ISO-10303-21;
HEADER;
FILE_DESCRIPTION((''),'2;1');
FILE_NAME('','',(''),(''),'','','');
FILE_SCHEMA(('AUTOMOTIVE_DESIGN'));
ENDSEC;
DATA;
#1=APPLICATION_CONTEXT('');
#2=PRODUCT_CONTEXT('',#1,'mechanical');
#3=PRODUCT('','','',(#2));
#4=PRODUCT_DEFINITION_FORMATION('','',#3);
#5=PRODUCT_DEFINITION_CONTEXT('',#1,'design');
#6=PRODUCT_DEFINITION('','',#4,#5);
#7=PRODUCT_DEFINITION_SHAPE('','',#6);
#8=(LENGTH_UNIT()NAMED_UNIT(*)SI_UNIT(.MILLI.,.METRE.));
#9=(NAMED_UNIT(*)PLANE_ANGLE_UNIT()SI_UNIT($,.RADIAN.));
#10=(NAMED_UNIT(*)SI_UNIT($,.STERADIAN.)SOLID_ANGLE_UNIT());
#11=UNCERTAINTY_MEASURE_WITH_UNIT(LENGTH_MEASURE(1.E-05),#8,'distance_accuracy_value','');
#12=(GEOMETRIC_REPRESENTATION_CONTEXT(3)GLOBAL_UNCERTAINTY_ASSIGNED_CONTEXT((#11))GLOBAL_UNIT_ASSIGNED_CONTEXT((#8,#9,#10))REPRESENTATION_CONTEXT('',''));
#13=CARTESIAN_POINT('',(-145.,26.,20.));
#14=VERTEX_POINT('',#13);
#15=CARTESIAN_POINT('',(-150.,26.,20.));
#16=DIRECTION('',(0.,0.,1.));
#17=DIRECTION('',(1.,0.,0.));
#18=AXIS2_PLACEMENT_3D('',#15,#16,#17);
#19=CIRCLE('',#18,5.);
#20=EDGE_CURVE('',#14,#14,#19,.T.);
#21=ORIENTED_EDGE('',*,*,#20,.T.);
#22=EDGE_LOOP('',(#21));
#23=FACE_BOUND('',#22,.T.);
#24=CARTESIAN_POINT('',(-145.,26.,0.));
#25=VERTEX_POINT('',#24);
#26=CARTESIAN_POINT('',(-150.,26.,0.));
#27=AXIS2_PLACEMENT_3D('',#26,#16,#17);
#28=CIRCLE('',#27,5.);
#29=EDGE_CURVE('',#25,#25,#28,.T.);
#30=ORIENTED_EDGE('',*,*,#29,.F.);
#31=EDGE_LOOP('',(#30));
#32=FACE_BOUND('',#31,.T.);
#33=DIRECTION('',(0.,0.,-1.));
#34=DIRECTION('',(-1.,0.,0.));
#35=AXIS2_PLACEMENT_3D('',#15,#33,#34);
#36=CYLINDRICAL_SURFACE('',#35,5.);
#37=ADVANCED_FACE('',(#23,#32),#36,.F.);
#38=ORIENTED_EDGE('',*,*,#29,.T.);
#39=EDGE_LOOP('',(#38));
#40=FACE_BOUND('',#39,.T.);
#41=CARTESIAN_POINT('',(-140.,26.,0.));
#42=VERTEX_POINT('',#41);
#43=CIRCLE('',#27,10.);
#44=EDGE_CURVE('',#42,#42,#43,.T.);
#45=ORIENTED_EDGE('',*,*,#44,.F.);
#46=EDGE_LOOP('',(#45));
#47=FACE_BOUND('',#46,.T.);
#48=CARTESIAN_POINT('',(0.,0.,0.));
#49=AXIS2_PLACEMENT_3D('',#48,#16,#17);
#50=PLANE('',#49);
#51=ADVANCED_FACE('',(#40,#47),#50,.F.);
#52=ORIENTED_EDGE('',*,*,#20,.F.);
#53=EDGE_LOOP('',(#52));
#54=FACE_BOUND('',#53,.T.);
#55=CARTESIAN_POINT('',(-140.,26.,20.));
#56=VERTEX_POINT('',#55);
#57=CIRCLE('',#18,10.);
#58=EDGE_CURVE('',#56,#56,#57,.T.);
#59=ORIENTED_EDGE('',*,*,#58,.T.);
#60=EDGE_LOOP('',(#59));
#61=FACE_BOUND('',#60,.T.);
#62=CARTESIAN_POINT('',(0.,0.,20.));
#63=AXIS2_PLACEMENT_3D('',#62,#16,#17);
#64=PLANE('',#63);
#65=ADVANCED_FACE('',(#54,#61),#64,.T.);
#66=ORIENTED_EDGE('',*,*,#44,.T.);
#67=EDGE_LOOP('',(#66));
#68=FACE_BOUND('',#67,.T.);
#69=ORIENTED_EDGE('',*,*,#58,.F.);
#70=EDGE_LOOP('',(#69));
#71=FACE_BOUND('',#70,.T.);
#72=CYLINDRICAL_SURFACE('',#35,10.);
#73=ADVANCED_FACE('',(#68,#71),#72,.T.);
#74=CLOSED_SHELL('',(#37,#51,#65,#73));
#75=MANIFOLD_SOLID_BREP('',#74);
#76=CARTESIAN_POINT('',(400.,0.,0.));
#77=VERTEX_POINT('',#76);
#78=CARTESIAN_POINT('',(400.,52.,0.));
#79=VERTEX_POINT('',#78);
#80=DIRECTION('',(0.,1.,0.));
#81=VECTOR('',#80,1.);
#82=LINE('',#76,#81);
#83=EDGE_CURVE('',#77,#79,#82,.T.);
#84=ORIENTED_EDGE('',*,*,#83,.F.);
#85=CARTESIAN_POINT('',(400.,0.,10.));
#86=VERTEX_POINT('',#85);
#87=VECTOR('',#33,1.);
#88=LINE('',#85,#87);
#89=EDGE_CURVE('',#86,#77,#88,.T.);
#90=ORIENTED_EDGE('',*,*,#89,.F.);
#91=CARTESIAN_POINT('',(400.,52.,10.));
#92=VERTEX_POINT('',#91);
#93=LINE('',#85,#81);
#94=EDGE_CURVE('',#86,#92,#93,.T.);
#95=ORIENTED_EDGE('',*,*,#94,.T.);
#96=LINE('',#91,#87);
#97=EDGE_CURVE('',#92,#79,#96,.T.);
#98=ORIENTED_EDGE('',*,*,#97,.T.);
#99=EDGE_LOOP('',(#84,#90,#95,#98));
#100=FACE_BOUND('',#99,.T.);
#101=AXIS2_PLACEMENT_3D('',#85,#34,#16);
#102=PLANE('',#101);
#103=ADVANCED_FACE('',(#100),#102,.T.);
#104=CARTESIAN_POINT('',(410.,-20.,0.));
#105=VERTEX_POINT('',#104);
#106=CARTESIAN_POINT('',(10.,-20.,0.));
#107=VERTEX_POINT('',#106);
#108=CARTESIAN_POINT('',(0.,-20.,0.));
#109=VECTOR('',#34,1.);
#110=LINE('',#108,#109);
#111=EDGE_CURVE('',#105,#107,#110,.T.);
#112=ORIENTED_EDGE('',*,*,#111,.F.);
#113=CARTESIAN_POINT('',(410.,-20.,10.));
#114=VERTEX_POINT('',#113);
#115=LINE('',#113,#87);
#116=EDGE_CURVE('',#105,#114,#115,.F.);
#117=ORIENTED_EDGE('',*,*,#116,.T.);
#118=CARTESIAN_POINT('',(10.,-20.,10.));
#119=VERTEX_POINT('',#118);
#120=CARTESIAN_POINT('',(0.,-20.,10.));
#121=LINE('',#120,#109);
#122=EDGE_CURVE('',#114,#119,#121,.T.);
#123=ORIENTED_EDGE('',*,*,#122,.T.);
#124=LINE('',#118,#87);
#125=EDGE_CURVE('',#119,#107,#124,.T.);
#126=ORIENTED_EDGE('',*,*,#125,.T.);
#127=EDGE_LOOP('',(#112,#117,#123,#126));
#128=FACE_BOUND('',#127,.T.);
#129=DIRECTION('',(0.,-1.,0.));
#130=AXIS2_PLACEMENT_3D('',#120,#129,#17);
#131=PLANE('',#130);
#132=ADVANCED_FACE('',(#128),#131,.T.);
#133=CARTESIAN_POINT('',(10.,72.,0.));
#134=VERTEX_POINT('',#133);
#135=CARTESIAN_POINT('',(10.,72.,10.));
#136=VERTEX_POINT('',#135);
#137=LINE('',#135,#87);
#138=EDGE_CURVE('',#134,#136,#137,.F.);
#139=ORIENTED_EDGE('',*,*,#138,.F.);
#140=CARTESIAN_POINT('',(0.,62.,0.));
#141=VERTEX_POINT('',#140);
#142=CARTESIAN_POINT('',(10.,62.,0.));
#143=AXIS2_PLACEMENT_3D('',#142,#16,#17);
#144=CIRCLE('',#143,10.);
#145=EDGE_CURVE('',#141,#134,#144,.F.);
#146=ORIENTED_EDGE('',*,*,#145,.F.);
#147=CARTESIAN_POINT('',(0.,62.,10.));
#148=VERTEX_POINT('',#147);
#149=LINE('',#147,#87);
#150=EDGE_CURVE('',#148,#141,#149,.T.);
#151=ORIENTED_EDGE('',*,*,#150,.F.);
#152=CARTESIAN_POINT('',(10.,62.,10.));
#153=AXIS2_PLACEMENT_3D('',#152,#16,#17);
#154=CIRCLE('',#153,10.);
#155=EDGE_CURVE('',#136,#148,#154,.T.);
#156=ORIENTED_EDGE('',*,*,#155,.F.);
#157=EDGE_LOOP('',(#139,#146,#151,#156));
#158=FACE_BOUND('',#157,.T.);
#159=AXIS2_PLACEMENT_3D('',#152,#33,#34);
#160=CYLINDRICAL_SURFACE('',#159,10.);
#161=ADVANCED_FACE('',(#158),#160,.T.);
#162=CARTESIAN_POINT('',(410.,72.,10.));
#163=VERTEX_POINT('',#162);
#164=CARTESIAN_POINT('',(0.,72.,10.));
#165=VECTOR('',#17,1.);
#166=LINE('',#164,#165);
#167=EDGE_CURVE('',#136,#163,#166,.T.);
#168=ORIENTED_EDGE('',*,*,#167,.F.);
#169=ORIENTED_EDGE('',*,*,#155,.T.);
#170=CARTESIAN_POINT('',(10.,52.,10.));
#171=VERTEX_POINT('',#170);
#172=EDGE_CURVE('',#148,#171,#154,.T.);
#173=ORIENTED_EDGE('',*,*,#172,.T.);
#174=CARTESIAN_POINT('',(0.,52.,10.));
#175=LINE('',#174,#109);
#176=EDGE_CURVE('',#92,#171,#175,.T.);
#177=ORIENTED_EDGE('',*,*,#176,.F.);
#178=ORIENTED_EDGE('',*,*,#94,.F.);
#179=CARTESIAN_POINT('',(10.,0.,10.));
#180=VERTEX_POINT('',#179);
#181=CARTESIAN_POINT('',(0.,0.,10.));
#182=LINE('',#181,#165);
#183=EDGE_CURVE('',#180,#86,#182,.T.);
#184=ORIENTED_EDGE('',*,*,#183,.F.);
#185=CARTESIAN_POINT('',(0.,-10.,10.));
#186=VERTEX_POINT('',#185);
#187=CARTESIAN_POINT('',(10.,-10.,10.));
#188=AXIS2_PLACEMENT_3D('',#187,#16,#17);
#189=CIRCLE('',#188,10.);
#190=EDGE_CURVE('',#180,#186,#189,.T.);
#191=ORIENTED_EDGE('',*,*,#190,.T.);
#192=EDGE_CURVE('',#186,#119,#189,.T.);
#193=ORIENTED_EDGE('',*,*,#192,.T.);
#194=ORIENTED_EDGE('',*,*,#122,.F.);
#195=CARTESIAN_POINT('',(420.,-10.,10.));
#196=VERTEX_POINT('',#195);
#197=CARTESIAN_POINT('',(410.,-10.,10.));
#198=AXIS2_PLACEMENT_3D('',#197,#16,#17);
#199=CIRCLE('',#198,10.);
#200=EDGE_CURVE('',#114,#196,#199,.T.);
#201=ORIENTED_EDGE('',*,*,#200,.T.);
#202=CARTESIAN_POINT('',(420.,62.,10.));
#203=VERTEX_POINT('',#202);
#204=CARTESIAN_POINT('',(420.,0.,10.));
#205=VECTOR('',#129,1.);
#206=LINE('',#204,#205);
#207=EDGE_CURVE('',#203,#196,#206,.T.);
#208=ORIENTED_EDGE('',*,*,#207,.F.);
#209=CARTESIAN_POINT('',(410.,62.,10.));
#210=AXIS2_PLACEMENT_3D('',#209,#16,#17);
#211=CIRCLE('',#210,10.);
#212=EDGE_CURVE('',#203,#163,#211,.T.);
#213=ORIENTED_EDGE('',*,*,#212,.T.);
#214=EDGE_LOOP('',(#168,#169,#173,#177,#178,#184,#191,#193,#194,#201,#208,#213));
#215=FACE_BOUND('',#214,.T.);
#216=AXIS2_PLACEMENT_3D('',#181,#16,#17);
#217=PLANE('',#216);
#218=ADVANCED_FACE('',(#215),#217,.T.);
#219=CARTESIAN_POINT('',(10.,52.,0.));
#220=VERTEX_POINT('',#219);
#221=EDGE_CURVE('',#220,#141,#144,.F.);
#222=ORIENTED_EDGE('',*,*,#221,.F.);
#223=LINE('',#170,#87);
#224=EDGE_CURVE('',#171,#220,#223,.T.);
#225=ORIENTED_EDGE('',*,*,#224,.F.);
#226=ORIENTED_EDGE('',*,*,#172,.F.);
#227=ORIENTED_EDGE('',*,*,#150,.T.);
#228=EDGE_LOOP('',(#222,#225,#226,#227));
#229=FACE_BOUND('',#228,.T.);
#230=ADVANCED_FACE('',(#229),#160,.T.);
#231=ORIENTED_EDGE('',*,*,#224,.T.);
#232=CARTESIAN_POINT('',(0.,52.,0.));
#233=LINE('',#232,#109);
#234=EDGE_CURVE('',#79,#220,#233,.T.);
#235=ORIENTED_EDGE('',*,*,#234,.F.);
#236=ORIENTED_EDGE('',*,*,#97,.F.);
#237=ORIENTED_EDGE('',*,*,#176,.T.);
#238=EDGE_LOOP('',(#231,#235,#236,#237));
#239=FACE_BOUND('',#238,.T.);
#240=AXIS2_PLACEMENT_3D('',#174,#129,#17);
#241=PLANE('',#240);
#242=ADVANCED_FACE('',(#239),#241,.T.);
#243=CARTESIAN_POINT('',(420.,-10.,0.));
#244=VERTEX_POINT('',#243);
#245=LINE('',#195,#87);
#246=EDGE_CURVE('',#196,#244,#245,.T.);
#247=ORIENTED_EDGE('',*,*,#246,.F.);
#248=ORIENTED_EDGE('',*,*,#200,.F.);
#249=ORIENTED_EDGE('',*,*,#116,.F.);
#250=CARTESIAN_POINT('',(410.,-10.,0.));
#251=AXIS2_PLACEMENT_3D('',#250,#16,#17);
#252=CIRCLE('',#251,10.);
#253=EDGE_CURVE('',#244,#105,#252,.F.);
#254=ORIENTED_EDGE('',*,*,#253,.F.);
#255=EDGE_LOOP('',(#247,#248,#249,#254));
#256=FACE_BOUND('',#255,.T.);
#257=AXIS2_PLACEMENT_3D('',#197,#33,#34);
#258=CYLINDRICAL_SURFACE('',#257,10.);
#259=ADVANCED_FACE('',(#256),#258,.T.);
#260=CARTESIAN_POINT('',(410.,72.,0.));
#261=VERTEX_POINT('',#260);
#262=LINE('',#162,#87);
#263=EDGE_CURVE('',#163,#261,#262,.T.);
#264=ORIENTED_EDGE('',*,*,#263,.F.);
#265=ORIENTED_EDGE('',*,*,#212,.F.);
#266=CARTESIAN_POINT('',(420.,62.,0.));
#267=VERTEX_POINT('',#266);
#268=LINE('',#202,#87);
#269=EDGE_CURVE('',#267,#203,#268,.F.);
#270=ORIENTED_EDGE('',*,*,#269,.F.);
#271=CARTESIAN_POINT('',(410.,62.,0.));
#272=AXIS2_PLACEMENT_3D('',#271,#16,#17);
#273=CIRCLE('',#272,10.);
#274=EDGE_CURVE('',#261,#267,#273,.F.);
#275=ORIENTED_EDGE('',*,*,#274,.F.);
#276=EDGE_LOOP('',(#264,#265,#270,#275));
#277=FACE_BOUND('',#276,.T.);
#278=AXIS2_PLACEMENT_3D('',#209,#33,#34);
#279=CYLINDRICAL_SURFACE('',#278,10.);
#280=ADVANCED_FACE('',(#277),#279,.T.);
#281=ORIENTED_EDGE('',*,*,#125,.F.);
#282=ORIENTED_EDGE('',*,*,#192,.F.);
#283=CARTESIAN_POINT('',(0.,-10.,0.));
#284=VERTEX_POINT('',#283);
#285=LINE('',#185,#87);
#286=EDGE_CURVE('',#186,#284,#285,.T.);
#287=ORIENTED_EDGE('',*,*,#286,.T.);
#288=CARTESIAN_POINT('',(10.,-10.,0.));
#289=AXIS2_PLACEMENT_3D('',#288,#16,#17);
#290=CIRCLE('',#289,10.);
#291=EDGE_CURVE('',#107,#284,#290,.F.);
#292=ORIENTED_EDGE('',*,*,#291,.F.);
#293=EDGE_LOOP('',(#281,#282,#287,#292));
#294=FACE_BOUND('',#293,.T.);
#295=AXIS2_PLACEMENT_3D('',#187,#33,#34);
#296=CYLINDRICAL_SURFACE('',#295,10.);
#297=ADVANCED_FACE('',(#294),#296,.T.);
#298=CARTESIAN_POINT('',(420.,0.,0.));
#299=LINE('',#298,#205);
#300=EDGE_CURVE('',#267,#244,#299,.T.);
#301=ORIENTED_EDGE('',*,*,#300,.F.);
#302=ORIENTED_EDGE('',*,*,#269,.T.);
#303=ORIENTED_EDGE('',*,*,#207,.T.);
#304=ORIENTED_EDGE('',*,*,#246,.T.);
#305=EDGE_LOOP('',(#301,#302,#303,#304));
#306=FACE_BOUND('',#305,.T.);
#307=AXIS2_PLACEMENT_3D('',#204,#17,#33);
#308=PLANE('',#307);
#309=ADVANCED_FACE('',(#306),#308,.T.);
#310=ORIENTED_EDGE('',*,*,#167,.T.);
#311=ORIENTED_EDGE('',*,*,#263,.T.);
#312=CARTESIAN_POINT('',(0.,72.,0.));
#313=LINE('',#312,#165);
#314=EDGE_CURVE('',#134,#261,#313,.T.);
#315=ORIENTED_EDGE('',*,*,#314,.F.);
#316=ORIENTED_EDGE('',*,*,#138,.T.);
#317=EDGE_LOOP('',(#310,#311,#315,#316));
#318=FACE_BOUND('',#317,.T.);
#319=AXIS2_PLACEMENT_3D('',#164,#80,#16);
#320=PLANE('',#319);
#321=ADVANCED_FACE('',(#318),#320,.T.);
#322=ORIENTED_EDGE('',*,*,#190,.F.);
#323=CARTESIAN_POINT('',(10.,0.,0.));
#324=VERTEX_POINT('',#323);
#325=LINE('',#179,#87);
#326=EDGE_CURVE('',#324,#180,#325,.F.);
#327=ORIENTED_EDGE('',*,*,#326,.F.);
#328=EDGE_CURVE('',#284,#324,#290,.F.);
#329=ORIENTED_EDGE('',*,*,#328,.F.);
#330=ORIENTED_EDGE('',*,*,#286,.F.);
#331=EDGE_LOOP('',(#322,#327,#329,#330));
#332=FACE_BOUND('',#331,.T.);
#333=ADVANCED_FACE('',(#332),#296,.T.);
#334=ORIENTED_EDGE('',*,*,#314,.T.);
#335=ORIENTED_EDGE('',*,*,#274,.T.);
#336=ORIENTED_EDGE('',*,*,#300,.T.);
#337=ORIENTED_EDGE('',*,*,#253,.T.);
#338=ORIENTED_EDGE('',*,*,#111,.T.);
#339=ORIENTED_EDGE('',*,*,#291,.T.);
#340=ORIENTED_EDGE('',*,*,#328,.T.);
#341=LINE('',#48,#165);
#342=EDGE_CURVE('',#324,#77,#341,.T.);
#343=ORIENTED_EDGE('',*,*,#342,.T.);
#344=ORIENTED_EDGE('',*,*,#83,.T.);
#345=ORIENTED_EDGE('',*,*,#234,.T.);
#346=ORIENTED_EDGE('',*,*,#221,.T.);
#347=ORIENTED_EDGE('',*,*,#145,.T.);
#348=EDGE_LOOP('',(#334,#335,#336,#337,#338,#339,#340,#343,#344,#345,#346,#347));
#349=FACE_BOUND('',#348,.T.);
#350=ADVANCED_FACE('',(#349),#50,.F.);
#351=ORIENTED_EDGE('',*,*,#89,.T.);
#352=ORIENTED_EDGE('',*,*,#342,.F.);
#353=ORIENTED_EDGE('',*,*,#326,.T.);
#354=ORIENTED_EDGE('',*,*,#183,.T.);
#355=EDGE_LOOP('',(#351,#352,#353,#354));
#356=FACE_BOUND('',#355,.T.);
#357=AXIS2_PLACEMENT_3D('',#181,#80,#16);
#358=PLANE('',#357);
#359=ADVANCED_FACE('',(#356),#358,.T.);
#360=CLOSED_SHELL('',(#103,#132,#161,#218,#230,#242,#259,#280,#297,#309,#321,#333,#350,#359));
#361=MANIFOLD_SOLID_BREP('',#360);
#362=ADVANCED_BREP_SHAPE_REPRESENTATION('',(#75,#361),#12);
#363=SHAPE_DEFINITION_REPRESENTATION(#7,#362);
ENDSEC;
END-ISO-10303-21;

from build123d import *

# Parameters (mm, degrees)
EXTRUDE_1_DEPTH = 10
SKETCH_1_3_R    = 10
SKETCH_1_3_R_2  = 5
EXTRUDE_2_DEPTH = 20
FILLET_1_R      = 10


with BuildPart() as part:
    # 草图1 → 凸台-拉伸1 (new body)
    with BuildSketch(Plane.XY):
        Polygon((0, -20), (0, 0), (400, 0), (400, 52), (0, 52), (0, 72), (420, 72), (420, -20), align=None)
    extrude(amount=EXTRUDE_1_DEPTH)

    # 圆角1
    fillet_1_edges = [part.edges().sort_by_distance(p)[0] for p in [
        (420, -20, 5),
        (420, 72, 5),
        (0, -20, 5),
        (0, 0, 5),
        (0, 52, 5),
        (0, 72, 5),
    ]]
    fillet(fillet_1_edges, radius=FILLET_1_R - 0.0001)  # a hair under: the kernel refuses the full size


with BuildPart() as body_2:
    # 草图1<3> → 凸台-拉伸2 (new body)
    with BuildSketch(Plane.XY):
        with Locations((-150, 26)):
            Circle(SKETCH_1_3_R)
        with Locations((-150, 26)):
            Circle(SKETCH_1_3_R_2, mode=Mode.SUBTRACT)
    extrude(amount=EXTRUDE_2_DEPTH)


solid = Compound([part.part, body_2.part])
